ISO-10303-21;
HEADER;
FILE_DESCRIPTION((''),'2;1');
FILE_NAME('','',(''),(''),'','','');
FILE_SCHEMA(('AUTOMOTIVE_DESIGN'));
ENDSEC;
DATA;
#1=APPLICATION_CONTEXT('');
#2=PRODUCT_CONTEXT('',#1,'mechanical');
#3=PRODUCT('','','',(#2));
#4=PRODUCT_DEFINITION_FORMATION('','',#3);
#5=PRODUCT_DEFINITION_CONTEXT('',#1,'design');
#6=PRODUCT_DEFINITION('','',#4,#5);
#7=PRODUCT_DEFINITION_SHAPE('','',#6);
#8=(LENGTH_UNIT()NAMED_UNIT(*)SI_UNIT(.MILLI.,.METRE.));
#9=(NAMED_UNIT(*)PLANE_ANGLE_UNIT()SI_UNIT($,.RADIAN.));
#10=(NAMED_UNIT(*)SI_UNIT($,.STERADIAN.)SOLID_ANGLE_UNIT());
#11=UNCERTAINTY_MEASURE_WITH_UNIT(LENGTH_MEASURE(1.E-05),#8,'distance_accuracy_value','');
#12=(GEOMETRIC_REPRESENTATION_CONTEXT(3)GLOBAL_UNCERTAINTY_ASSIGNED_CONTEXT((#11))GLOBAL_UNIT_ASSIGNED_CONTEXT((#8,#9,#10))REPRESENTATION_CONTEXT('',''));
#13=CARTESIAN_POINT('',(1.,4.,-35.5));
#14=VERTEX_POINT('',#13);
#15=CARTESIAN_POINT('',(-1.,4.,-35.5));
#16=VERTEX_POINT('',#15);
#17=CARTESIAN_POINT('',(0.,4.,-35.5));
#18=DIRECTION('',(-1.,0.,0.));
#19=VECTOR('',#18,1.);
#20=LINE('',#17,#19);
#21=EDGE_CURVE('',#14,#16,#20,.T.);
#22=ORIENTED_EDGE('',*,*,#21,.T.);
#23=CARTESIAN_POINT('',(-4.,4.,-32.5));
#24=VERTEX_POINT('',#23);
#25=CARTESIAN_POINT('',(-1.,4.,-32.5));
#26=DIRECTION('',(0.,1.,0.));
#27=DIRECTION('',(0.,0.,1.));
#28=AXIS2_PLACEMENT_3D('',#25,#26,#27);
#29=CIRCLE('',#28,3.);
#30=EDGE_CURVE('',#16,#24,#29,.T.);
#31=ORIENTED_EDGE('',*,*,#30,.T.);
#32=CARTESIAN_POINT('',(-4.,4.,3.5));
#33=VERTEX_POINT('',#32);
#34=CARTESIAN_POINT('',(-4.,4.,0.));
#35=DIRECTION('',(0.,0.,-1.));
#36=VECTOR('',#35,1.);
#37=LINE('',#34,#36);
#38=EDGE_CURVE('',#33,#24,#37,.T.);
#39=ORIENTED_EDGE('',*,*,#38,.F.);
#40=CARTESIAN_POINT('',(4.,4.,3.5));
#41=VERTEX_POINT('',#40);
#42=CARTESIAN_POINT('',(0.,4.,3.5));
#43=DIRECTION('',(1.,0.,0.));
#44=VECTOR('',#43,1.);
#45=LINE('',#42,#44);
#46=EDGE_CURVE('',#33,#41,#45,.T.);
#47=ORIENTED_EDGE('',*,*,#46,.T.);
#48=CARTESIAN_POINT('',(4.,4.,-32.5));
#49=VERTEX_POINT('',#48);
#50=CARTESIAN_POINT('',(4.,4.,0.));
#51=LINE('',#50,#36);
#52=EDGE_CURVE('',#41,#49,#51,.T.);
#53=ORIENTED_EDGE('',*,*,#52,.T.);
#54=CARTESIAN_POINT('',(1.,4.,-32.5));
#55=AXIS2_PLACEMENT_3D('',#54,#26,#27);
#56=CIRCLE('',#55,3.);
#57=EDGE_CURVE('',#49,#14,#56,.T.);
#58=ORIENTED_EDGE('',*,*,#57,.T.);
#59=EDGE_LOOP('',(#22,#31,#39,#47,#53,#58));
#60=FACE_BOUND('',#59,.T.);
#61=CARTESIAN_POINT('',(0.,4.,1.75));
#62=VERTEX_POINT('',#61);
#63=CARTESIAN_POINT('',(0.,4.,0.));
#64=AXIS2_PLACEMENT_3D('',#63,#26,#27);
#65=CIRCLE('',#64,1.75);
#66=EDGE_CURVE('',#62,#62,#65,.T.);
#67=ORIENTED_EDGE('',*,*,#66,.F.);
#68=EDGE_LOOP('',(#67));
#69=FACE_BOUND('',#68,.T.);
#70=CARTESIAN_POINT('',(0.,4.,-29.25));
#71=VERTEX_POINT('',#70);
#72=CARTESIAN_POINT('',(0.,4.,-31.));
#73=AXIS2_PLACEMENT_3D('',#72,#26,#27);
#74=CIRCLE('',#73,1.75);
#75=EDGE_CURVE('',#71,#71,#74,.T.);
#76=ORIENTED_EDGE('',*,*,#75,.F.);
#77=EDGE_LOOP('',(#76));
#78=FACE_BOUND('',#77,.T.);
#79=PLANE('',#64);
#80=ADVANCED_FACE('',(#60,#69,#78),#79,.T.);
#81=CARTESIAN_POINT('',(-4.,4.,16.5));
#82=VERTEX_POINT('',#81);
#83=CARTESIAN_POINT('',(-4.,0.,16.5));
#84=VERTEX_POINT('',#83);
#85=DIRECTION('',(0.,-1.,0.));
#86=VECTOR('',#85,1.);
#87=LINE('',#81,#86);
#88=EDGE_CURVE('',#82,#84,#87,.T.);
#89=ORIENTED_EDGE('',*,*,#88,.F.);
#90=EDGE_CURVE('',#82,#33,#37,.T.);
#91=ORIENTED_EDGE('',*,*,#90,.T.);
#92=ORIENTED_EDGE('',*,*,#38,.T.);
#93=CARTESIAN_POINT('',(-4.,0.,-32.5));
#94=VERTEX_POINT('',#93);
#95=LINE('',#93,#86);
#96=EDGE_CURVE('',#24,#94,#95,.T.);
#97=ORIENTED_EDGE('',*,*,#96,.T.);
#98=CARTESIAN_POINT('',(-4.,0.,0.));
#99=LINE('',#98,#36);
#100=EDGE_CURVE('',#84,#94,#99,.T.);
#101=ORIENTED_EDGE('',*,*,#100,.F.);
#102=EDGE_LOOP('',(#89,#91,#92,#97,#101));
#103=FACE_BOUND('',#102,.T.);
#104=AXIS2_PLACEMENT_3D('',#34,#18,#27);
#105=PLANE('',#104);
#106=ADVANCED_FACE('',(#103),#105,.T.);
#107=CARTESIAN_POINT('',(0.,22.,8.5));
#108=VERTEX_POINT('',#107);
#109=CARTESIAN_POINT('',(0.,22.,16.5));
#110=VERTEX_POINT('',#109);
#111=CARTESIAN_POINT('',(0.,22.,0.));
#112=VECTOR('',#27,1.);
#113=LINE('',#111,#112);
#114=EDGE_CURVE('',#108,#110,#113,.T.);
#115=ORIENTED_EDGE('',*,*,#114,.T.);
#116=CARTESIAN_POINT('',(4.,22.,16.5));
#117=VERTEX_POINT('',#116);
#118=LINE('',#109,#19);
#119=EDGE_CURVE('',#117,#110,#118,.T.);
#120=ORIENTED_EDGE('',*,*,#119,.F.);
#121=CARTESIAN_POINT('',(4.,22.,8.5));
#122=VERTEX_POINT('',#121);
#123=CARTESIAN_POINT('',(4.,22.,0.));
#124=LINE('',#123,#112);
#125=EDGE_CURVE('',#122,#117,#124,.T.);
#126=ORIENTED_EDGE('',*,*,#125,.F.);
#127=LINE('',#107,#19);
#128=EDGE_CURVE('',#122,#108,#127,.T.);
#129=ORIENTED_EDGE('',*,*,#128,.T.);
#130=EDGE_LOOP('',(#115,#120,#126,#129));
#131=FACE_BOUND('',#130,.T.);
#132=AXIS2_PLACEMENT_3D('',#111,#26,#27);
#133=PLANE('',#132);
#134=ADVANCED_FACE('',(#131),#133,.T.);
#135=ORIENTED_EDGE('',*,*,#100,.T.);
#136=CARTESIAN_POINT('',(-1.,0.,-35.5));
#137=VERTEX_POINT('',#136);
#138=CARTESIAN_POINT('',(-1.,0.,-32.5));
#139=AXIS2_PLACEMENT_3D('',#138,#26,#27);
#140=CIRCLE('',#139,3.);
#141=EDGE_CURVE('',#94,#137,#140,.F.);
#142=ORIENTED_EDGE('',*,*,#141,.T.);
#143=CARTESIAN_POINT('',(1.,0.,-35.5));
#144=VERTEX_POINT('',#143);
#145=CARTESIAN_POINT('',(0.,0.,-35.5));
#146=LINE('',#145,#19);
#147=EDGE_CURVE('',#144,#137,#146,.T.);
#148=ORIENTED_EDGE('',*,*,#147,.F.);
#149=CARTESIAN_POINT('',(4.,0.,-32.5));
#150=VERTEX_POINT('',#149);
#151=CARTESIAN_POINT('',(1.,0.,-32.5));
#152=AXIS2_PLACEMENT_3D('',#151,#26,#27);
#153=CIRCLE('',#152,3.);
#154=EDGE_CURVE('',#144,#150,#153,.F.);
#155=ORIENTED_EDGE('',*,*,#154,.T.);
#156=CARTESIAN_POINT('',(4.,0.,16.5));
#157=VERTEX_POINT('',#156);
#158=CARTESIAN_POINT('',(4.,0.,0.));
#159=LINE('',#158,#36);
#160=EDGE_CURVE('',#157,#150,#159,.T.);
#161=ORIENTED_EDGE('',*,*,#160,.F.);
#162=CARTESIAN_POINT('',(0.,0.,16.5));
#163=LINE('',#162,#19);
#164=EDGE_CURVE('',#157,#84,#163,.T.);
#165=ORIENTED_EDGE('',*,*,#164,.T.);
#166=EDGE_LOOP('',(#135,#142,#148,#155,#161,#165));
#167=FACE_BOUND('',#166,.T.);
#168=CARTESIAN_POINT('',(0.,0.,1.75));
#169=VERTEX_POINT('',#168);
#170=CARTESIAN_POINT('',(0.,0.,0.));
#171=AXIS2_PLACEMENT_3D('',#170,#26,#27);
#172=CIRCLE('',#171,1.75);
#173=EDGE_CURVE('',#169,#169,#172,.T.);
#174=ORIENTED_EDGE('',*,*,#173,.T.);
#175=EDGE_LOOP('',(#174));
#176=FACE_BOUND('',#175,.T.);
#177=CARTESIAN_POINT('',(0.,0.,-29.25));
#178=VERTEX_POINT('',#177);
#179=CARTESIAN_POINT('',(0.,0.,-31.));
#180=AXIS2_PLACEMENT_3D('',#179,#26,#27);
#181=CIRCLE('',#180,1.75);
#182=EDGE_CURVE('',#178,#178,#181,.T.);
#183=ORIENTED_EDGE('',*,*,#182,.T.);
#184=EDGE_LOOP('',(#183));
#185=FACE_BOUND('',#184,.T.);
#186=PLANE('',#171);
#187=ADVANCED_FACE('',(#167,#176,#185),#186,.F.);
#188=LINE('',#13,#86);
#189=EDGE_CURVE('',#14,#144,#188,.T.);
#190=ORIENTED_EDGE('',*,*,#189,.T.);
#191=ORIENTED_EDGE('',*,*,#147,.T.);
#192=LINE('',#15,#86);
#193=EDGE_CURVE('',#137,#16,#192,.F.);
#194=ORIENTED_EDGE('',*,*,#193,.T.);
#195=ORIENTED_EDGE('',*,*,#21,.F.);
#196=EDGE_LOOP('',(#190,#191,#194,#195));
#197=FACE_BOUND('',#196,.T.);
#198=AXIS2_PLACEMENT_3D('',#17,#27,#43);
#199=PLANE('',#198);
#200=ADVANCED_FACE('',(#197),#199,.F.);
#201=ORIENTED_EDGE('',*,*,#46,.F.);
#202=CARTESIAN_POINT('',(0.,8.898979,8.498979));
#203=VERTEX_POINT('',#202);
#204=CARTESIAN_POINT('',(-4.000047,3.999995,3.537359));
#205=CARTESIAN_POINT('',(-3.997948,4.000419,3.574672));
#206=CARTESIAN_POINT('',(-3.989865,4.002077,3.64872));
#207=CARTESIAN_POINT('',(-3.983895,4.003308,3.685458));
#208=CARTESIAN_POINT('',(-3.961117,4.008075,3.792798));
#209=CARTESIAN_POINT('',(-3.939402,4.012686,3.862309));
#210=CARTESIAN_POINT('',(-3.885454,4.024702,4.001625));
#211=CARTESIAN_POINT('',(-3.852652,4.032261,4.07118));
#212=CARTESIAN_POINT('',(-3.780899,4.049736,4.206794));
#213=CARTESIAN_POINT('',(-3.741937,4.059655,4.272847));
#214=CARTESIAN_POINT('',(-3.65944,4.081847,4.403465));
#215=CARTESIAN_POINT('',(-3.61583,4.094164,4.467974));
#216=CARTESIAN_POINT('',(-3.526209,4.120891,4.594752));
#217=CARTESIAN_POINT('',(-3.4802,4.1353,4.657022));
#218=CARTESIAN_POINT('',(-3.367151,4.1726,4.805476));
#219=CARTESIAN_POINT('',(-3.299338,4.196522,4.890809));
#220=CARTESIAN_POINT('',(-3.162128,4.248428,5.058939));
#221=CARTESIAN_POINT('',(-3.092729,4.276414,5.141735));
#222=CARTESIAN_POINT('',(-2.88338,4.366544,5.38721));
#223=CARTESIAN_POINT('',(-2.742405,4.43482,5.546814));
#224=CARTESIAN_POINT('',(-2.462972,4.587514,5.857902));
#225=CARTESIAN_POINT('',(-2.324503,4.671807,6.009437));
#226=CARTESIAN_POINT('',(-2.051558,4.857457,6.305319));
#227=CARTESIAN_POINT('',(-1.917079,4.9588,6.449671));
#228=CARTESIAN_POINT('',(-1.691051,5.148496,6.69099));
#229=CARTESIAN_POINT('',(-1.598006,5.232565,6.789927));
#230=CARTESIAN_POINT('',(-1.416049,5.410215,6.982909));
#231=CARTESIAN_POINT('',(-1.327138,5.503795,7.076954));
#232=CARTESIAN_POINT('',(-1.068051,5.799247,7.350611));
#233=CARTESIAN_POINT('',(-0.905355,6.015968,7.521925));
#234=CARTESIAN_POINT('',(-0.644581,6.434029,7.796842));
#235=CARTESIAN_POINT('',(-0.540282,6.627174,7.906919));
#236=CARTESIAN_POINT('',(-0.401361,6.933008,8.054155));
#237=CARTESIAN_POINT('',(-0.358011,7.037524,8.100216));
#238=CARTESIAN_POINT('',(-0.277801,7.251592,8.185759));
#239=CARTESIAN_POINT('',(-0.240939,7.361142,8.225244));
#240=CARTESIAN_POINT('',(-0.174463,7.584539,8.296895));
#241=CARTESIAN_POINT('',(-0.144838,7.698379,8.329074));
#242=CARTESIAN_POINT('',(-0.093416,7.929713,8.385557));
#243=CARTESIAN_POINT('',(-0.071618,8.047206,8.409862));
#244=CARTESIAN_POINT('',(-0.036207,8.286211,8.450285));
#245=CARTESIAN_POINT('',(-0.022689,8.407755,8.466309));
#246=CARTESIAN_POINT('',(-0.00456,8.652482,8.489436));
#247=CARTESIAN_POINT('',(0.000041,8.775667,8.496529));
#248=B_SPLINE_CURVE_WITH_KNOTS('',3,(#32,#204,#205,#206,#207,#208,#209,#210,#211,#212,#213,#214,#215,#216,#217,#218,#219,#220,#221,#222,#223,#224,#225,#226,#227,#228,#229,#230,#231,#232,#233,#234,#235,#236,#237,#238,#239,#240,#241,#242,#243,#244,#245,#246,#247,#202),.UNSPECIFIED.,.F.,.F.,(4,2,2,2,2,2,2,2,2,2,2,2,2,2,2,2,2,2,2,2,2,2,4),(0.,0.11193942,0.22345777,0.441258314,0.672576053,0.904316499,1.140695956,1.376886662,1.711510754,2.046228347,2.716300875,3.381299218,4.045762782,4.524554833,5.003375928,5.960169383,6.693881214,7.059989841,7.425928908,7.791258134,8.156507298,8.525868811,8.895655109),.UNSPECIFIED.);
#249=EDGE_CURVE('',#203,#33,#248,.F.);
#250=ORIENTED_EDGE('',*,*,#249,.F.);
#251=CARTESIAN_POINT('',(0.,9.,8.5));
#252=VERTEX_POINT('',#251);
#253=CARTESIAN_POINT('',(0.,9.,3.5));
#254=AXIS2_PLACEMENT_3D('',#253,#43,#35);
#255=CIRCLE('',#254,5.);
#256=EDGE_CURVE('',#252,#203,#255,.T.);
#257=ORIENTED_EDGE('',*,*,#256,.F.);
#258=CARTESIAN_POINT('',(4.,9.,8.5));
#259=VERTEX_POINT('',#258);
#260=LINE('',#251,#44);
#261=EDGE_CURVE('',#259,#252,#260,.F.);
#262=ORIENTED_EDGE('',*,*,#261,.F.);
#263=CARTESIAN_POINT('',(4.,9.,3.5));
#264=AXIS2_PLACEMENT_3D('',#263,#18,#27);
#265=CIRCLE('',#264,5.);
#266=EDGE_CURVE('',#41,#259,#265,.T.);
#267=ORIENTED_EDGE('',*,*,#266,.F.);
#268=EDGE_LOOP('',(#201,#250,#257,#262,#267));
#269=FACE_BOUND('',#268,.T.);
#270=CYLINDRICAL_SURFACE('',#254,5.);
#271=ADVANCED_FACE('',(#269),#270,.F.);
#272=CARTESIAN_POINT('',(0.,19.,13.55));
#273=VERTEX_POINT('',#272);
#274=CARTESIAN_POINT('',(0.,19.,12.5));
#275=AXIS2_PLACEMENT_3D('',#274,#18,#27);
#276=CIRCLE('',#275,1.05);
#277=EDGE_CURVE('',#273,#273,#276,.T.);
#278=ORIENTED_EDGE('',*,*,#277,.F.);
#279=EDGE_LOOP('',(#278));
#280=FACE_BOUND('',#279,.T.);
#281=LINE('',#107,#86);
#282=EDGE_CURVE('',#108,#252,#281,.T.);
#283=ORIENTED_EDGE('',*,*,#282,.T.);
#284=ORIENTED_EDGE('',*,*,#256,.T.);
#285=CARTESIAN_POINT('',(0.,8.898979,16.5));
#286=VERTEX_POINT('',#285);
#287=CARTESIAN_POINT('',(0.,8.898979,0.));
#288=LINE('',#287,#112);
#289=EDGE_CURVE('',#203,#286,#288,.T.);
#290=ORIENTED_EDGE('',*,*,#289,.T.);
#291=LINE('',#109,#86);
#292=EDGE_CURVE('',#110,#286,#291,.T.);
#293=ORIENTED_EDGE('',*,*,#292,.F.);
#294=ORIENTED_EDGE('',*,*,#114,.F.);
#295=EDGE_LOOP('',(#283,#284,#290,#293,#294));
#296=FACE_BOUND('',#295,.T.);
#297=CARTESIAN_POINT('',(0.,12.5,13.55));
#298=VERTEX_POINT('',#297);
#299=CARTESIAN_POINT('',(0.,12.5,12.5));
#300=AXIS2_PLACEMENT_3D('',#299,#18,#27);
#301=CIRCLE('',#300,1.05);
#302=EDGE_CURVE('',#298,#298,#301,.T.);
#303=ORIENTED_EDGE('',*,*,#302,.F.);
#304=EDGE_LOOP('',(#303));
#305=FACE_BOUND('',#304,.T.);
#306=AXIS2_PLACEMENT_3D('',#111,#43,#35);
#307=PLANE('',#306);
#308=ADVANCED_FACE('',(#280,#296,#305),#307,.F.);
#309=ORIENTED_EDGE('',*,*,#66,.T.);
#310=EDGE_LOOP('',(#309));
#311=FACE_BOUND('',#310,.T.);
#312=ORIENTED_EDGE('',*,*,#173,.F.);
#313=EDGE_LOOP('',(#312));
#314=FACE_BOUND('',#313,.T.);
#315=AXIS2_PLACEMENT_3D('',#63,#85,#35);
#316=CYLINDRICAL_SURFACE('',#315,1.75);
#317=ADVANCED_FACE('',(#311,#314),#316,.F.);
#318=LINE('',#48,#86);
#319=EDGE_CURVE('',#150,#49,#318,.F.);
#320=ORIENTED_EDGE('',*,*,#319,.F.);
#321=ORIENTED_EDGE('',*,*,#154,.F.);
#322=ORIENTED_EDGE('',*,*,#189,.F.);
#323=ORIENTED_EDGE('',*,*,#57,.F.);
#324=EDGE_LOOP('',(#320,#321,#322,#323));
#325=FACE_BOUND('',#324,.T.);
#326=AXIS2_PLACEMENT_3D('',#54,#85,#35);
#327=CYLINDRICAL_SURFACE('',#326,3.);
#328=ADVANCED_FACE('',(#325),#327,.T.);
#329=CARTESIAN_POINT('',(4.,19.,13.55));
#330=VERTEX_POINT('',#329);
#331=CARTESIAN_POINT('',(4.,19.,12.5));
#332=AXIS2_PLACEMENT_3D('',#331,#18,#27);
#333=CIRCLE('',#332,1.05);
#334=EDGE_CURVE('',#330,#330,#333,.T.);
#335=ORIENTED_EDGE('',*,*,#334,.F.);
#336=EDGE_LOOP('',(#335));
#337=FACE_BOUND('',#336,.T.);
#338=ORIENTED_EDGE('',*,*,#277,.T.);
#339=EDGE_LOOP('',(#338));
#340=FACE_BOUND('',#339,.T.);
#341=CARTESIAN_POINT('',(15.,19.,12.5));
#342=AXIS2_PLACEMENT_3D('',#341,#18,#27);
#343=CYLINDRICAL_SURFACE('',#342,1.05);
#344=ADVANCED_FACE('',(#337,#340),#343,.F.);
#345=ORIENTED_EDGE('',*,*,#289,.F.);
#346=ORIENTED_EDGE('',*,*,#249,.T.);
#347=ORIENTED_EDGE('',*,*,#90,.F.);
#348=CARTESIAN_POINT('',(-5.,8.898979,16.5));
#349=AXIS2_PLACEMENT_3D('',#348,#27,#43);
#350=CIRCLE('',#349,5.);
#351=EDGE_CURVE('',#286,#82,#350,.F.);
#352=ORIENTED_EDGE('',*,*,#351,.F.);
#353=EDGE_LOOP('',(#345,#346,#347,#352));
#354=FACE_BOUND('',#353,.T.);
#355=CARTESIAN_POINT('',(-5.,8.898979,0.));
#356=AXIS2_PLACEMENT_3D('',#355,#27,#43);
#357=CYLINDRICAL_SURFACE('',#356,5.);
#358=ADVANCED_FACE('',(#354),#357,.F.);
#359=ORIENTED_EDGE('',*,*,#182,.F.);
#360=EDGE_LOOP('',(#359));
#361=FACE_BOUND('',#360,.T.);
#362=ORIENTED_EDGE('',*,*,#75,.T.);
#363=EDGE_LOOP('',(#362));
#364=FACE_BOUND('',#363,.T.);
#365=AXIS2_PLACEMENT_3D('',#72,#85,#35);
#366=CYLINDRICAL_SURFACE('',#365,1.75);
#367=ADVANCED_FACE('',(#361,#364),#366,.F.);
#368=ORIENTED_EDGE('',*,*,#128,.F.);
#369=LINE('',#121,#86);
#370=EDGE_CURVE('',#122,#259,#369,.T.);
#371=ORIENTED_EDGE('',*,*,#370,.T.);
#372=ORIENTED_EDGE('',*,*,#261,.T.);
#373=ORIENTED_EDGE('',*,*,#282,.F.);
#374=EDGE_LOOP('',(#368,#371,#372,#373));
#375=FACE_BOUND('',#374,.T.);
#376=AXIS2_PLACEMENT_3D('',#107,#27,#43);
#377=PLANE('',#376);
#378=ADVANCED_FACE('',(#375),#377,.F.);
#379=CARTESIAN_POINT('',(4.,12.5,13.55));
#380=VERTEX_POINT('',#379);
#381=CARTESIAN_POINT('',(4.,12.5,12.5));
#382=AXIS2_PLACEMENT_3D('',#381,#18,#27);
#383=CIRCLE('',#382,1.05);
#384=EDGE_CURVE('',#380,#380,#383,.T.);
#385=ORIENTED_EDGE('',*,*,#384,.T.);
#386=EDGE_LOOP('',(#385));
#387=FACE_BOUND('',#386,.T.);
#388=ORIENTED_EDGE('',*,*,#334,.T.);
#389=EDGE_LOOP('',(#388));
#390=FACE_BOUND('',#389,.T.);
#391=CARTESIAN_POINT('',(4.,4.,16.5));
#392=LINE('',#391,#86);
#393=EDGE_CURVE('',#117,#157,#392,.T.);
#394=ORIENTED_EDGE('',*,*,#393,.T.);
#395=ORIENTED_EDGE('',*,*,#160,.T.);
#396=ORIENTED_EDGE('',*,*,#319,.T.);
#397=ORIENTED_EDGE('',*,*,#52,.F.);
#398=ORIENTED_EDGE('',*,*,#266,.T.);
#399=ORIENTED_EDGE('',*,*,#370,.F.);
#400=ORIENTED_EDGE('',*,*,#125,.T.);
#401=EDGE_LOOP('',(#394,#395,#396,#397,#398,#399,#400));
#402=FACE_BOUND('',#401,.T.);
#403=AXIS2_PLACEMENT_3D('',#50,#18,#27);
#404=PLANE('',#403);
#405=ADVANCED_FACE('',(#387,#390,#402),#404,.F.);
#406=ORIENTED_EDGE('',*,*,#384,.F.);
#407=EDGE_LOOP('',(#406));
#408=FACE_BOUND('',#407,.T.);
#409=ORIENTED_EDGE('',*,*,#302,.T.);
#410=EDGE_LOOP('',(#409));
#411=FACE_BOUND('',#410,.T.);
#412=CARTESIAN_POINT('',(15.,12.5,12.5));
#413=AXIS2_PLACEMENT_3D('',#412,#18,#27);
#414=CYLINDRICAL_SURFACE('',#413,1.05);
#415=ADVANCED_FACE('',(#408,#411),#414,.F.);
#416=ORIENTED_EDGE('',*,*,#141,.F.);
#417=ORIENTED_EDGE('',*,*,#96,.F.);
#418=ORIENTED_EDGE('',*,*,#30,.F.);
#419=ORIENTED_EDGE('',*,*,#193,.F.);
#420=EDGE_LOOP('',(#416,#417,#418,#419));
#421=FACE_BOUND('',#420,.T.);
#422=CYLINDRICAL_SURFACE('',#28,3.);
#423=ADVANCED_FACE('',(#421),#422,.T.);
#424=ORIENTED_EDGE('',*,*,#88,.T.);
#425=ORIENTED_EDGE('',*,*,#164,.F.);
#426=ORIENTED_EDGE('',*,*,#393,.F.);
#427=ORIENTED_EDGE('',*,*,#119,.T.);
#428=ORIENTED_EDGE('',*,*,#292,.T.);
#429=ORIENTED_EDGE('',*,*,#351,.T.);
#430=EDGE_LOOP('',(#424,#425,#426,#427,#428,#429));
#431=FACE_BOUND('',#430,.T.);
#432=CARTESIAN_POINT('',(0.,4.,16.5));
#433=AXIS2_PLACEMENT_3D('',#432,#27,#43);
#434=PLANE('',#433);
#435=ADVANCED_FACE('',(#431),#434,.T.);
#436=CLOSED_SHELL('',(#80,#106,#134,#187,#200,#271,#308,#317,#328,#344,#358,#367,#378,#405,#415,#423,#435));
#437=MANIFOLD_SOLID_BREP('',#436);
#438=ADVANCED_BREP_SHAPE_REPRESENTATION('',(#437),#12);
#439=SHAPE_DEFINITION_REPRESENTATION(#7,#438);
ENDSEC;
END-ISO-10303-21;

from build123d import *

# Parameters (mm, degrees)
SKETCH1_W           = 4
SKETCH1_H           = 8
SKETCH1_H_2         = 4.5
BOSS_EXTRUDE1_DEPTH = 4
SKETCH1_3_W         = 4
SKETCH1_3_H         = 8
BOSS_EXTRUDE2_DEPTH = 22
SKETCH3_R           = 1.05
CUT_EXTRUDE2_DEPTH  = 15
FILLET1_START       = -0.04496
FILLET1_DEPTH       = 4.04496
FILLET1_START_2     = -4.000000861
FILLET1_2_DEPTH     = 3.955040861
FILLET1_START_3     = 2
FILLET1_3_DEPTH     = 6.5
FILLET1_START_4     = 8.5
FILLET1_4_DEPTH     = 8
FILLET2_R           = 3


with BuildPart() as part:
    # Sketch1 → Boss-Extrude1 (new body)
    # profile 1 of 3: a face of its own
    with BuildSketch(Plane(origin=(0, 0, 0), x_dir=(1, 0, 0), z_dir=(0, 1, 0))):
        with Locations((2, -12.5)):
            Rectangle(SKETCH1_W, SKETCH1_H)
    # profile 2 of 3: a face of its own
    with BuildSketch(Plane(origin=(0, 0, 0), x_dir=(1, 0, 0), z_dir=(0, 1, 0))):
        Polygon((-4, -16.5), (0, -16.5), (0, -8.5), (0, -4), (4, -4), (4, 35.5), (-4, 35.5), align=None)
        with BuildLine():
            ThreePointArc((1.75, 0), (-1.237436867, -1.237436867), (0, 1.75))
            ThreePointArc((0, 1.75), (1.237436867, 1.237436867), (1.75, 0))
        make_face(mode=Mode.SUBTRACT)
        with BuildLine():
            ThreePointArc((1.75, 31), (1.237436867, 29.762563133), (0, 29.25))
            ThreePointArc((0, 29.25), (-1.237436867, 32.237436867), (1.75, 31))
        make_face(mode=Mode.SUBTRACT)
    # profile 3 of 3: a face of its own
    with BuildSketch(Plane(origin=(0, 0, 0), x_dir=(1, 0, 0), z_dir=(0, 1, 0))):
        with Locations((2, -6.25)):
            Rectangle(SKETCH1_W, SKETCH1_H_2)
    extrude(amount=BOSS_EXTRUDE1_DEPTH)

    # Sketch1<3> → Boss-Extrude2 (add)
    with BuildSketch(Plane(origin=(0, 0, 0), x_dir=(1, 0, 0), z_dir=(0, 1, 0))):
        with Locations((2, -12.5)):
            Rectangle(SKETCH1_3_W, SKETCH1_3_H)
    extrude(amount=BOSS_EXTRUDE2_DEPTH)

    # Sketch3 → Cut-Extrude2 (cut)
    with BuildSketch(Plane.ZY):
        with Locations((12.5, 19)):
            Circle(SKETCH3_R)
        with Locations((12.5, 12.5)):
            Circle(SKETCH3_R)
    extrude(amount=-CUT_EXTRUDE2_DEPTH, mode=Mode.SUBTRACT)

    # Fillet1: read off the stored shape, not the designer's step
    # Fillet1 outline → Fillet1 (add)
    with BuildSketch(Plane.YZ.offset(FILLET1_START)):
        with BuildLine():
            ThreePointArc((4, 3.5), (5.464466094, 7.035533906), (9, 8.5))
            Line((9, 8.5), (4, 8.5))
            Line((4, 8.5), (4, 3.5))
        make_face()
    extrude(amount=FILLET1_DEPTH)

    # Fillet1 2 outline → Fillet1 2 (add)
    with BuildSketch(Plane.YZ.offset(FILLET1_START_2)):
        with BuildLine():
            ThreePointArc((4, 3.5), (5.464466094, 7.035533906), (9, 8.5))
            Line((9, 8.5), (4, 8.5))
            Line((4, 8.5), (4, 3.5))
        make_face()
    extrude(amount=FILLET1_2_DEPTH)

    # Fillet1 3 outline → Fillet1 3 (cut)
    with BuildSketch(Plane.XY.offset(FILLET1_START_3)):
        with BuildLine():
            Line((-4.000000861, 10), (-4.000045415, 3.99999073))
            ThreePointArc((-4.000045415, 3.99999073), (-1.127031311, 5.736683874), (0, 8.898979486))
            Line((0, 8.898979486), (0, 10))
            Line((0, 10), (-4.000000861, 10))
        make_face()
    extrude(amount=FILLET1_3_DEPTH, mode=Mode.SUBTRACT)

    # Fillet1 4 outline → Fillet1 4 (add)
    with BuildSketch(Plane.XY.offset(FILLET1_START_4)):
        with BuildLine():
            ThreePointArc((0, 8.898979486), (-1.127031311, 5.736683874), (-4.000045415, 3.99999073))
            Line((-4.000045415, 3.99999073), (0, 4))
            Line((0, 4), (0, 8.898979486))
        make_face()
    extrude(amount=FILLET1_4_DEPTH)

    # Fillet2
    fillet2_edges = [part.edges().sort_by_distance(p)[0] for p in [
        (-4, 2, -35.5),
        (4, 2, -35.5),
    ]]
    fillet(fillet2_edges, radius=FILLET2_R)


solid = part.part
